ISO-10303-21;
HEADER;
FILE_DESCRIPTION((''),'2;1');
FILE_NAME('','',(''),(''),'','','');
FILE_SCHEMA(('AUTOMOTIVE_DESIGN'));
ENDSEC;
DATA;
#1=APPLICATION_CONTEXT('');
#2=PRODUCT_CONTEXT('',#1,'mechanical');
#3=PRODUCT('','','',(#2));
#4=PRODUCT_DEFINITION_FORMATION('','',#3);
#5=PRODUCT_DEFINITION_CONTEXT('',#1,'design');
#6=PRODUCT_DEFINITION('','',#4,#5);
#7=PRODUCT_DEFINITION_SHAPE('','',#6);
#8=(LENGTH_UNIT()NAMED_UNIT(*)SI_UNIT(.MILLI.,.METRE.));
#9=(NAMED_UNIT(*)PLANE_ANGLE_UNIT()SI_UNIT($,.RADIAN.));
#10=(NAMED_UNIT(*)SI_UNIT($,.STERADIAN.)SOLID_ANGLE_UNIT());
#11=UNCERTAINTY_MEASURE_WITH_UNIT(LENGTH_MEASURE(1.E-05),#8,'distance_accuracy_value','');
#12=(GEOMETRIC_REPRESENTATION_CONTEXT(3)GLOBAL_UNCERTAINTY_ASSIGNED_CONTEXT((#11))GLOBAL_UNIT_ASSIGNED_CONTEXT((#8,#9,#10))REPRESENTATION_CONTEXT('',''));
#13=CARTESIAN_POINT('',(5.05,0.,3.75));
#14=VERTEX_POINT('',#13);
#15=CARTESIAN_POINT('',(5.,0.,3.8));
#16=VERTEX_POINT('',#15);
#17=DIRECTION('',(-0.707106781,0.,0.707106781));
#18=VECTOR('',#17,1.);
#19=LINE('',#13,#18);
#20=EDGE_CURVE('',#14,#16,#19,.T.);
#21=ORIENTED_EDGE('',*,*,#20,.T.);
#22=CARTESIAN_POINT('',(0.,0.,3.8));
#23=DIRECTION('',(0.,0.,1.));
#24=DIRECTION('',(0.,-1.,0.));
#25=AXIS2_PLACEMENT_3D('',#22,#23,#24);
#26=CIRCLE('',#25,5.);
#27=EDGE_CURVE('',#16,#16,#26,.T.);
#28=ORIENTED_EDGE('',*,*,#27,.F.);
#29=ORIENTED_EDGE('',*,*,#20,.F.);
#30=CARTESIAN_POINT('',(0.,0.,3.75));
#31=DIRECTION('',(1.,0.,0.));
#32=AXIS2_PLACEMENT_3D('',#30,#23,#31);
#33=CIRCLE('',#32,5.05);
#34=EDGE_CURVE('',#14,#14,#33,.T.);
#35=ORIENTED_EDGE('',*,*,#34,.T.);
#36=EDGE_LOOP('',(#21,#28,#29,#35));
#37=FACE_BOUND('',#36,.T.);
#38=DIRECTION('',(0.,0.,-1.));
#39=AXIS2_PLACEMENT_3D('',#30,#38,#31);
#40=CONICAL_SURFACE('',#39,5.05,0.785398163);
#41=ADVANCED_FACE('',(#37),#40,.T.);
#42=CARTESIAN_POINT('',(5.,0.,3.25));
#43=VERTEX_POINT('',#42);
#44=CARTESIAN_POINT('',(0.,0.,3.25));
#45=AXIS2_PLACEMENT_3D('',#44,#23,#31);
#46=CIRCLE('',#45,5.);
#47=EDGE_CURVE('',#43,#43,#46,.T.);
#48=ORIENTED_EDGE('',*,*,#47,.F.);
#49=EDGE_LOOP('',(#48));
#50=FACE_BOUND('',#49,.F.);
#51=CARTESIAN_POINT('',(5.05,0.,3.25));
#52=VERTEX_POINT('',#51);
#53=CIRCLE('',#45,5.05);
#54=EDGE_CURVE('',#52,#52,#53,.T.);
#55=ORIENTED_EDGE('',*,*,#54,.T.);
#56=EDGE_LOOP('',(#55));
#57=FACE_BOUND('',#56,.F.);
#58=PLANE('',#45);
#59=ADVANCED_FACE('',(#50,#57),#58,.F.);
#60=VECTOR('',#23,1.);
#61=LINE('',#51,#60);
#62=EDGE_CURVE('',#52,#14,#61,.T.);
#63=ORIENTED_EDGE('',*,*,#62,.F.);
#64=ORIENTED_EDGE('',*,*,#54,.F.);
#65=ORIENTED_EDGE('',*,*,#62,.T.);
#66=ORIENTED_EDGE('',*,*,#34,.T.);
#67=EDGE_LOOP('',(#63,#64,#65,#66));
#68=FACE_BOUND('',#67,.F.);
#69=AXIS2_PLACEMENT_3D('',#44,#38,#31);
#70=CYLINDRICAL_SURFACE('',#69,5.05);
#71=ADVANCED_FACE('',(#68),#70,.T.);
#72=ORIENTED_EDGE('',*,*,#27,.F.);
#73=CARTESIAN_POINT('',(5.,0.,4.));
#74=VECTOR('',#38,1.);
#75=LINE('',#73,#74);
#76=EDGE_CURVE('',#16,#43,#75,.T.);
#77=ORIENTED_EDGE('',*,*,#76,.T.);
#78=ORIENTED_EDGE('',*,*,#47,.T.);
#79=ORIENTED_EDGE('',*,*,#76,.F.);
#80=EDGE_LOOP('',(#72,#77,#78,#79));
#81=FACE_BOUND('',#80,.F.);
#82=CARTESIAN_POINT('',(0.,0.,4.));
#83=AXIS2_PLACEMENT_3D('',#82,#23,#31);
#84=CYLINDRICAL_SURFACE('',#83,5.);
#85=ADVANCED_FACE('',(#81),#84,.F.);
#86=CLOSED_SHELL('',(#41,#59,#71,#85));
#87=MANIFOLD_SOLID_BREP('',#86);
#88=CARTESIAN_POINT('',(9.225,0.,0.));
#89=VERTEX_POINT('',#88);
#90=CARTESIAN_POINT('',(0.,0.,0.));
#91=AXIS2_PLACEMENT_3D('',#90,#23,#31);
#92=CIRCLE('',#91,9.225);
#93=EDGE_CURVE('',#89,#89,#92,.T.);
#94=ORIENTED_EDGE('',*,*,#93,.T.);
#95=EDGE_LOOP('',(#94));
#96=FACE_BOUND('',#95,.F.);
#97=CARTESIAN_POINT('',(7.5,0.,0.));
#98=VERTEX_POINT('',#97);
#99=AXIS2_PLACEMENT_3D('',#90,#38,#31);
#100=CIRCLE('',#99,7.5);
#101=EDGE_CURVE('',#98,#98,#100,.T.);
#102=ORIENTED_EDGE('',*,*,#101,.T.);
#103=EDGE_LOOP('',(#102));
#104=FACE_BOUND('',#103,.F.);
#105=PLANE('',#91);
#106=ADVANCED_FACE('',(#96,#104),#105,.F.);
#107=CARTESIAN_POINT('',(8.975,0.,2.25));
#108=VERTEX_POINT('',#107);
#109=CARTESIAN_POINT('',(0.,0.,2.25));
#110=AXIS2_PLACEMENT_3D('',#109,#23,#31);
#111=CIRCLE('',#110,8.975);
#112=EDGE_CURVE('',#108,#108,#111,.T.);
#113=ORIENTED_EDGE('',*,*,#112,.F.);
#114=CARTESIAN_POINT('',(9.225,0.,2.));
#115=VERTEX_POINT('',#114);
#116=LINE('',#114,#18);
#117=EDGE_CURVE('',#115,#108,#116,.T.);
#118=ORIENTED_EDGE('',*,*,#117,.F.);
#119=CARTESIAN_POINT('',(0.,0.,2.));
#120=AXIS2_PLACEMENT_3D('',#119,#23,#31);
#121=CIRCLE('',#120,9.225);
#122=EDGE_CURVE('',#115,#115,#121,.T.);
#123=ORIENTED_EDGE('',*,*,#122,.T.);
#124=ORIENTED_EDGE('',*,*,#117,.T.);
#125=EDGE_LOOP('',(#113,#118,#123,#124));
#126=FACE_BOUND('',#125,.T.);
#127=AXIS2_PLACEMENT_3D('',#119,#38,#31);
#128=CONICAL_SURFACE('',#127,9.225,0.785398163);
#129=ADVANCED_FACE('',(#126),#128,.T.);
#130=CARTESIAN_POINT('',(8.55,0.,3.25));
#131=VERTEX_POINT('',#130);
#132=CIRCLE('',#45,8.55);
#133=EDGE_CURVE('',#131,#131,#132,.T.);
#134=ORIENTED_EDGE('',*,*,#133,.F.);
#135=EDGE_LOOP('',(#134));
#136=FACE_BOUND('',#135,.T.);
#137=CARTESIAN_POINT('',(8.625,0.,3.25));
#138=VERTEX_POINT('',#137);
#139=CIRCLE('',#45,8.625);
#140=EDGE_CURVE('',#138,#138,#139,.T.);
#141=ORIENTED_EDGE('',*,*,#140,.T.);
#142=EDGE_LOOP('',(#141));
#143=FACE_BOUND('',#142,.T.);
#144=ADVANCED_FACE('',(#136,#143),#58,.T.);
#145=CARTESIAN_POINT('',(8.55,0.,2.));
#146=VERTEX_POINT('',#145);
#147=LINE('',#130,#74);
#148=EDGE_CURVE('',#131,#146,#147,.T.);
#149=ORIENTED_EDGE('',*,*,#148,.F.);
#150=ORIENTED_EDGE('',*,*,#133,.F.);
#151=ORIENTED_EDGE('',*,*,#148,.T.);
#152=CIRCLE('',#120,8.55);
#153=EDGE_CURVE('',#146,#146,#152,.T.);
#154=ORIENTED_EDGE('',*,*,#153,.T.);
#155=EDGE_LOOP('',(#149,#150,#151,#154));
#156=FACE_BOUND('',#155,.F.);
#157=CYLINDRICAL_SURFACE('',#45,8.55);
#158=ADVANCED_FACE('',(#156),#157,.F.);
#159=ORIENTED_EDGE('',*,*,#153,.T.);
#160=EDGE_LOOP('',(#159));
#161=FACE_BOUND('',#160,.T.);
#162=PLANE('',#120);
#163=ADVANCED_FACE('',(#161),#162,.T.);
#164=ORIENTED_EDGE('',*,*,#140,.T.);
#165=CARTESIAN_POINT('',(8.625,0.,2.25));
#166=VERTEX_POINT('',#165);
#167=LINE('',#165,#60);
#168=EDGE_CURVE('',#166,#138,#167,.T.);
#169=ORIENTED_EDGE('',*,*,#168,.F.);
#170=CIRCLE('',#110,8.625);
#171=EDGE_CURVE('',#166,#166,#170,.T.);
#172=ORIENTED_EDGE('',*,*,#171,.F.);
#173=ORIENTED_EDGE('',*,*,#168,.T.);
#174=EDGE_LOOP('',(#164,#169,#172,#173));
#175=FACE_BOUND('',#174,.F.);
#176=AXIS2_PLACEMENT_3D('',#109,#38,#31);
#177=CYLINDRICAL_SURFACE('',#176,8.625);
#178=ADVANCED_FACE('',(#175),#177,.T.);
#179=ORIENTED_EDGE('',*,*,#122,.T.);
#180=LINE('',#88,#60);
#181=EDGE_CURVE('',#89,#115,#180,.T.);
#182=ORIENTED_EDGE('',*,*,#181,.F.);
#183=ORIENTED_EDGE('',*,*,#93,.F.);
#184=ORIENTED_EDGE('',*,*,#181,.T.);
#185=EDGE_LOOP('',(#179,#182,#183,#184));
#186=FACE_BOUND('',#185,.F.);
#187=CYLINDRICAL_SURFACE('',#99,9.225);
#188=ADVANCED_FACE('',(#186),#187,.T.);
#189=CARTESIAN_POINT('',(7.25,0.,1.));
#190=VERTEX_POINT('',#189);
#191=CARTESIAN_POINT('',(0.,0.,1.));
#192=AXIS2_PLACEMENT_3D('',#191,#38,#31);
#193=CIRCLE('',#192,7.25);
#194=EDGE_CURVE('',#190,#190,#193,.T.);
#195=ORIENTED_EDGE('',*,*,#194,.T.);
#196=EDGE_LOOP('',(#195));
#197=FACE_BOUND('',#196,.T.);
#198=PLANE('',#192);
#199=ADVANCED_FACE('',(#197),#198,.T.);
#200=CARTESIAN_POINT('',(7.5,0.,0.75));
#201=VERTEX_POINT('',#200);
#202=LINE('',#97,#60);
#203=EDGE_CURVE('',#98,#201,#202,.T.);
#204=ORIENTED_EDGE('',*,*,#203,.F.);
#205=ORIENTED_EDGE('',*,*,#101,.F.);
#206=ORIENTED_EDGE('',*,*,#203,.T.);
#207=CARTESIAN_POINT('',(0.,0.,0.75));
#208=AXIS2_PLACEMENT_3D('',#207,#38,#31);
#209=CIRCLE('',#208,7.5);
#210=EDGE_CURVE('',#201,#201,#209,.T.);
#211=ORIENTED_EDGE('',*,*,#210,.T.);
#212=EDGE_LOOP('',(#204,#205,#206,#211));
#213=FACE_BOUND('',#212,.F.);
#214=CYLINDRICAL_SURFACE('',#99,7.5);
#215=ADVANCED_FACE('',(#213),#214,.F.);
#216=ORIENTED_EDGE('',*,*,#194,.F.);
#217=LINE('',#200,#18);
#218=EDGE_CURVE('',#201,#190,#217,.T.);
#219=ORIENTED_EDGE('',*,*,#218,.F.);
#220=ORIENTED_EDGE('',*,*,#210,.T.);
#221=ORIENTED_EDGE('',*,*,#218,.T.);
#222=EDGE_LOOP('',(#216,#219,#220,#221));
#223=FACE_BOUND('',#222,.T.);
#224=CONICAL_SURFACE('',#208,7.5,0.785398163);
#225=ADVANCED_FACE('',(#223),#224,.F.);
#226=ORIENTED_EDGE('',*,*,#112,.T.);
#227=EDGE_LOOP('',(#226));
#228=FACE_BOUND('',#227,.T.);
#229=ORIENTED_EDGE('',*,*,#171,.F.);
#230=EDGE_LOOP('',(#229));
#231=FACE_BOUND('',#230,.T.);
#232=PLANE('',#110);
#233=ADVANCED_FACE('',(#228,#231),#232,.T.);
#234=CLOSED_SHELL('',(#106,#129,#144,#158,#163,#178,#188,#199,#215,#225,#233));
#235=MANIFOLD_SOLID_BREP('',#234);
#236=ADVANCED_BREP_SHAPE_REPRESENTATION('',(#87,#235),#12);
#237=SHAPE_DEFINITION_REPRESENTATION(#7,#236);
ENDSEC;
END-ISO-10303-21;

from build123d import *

# Parameters (mm, degrees)
F0_R      = 9.225
F1_DEPTH  = 2.25
F2_R      = 8.625
F3_DEPTH  = 1
F4_DEPTH  = 1
F5_R      = 5.05
F6_DEPTH  = 0.75
F7_R      = 5
F8_DEPTH  = 0.75
F10_R     = 8.55
F11_DEPTH = 1.25
F12_R     = 7.5
F13_DEPTH = 1
F14_SIZE  = 0.25


# Not quite as in the source:
# - a fillet or chamfer that OpenCascade refuses, or shapes differently, is made with other operations: its cross-section is extruded or revolved along the edge and cut away or added


with BuildPart() as f1:
    # F0 (on Top) → F1 (new body)
    with BuildSketch(Plane.XY):
        Circle(F0_R)
    extrude(amount=F1_DEPTH)

    # F2 (on face) → F3 (join)
    with BuildSketch(Plane.XY.offset(2.25)):
        Circle(F2_R)
    extrude(amount=F3_DEPTH)

    # F2 (on face) → F4 (join)
    with BuildSketch(Plane.XY.offset(2.25)):
        Circle(F2_R)
    extrude(amount=F4_DEPTH)

    # F5 (on face) → F6 (join)
    with BuildSketch(Plane.XY.offset(3.25)):
        Circle(F5_R)
    extrude(amount=F6_DEPTH)

    # F7 (on face) → F8 (cut)
    with BuildSketch(Plane.XY.offset(4)):
        Circle(F7_R)
    extrude(amount=-F8_DEPTH, mode=Mode.SUBTRACT)

    # F10 (on offset) → F11 (cut)
    with BuildSketch(Plane.XY.offset(3.25)):
        Circle(F10_R)
    extrude(amount=-F11_DEPTH, mode=Mode.SUBTRACT)

    # F12 (on face) → F13 (cut)
    with BuildSketch(Plane(origin=(0, 0, 0), x_dir=(1, 0, 0), z_dir=(0, 0, -1))):
        Circle(F12_R)
    extrude(amount=-F13_DEPTH, mode=Mode.SUBTRACT)

    # F14
    f14_edges = [f1.edges().sort_by_distance(p)[0] for p in [
        (-7.5, 0, 1),
    ]]
    chamfer(f14_edges, length=F14_SIZE)

    # F15: chamfer of 0.25 on 1 edges, made by hand

    # F15_s1 → F15_t2 (revolve, cut)
    with BuildSketch(Plane.XZ):
        Polygon((9.225, 2), (8.975, 2.25), (9.225, 2.25), align=None)
    revolve(axis=Axis((0, 0, 2.25), (0, 0, 1)), mode=Mode.SUBTRACT)

    # F15#s1: chamfer of 0.25 on 1 edges, made by hand

    # F15_s1_s1 → F15_s1_t2 (revolve, cut)
    with BuildSketch(Plane.XZ):
        Polygon((5.05, 3.75), (4.8, 4), (5.05, 4), align=None)
    revolve(axis=Axis((0, 0, 4), (0, 0, 1)), mode=Mode.SUBTRACT)


solid = f1.part
